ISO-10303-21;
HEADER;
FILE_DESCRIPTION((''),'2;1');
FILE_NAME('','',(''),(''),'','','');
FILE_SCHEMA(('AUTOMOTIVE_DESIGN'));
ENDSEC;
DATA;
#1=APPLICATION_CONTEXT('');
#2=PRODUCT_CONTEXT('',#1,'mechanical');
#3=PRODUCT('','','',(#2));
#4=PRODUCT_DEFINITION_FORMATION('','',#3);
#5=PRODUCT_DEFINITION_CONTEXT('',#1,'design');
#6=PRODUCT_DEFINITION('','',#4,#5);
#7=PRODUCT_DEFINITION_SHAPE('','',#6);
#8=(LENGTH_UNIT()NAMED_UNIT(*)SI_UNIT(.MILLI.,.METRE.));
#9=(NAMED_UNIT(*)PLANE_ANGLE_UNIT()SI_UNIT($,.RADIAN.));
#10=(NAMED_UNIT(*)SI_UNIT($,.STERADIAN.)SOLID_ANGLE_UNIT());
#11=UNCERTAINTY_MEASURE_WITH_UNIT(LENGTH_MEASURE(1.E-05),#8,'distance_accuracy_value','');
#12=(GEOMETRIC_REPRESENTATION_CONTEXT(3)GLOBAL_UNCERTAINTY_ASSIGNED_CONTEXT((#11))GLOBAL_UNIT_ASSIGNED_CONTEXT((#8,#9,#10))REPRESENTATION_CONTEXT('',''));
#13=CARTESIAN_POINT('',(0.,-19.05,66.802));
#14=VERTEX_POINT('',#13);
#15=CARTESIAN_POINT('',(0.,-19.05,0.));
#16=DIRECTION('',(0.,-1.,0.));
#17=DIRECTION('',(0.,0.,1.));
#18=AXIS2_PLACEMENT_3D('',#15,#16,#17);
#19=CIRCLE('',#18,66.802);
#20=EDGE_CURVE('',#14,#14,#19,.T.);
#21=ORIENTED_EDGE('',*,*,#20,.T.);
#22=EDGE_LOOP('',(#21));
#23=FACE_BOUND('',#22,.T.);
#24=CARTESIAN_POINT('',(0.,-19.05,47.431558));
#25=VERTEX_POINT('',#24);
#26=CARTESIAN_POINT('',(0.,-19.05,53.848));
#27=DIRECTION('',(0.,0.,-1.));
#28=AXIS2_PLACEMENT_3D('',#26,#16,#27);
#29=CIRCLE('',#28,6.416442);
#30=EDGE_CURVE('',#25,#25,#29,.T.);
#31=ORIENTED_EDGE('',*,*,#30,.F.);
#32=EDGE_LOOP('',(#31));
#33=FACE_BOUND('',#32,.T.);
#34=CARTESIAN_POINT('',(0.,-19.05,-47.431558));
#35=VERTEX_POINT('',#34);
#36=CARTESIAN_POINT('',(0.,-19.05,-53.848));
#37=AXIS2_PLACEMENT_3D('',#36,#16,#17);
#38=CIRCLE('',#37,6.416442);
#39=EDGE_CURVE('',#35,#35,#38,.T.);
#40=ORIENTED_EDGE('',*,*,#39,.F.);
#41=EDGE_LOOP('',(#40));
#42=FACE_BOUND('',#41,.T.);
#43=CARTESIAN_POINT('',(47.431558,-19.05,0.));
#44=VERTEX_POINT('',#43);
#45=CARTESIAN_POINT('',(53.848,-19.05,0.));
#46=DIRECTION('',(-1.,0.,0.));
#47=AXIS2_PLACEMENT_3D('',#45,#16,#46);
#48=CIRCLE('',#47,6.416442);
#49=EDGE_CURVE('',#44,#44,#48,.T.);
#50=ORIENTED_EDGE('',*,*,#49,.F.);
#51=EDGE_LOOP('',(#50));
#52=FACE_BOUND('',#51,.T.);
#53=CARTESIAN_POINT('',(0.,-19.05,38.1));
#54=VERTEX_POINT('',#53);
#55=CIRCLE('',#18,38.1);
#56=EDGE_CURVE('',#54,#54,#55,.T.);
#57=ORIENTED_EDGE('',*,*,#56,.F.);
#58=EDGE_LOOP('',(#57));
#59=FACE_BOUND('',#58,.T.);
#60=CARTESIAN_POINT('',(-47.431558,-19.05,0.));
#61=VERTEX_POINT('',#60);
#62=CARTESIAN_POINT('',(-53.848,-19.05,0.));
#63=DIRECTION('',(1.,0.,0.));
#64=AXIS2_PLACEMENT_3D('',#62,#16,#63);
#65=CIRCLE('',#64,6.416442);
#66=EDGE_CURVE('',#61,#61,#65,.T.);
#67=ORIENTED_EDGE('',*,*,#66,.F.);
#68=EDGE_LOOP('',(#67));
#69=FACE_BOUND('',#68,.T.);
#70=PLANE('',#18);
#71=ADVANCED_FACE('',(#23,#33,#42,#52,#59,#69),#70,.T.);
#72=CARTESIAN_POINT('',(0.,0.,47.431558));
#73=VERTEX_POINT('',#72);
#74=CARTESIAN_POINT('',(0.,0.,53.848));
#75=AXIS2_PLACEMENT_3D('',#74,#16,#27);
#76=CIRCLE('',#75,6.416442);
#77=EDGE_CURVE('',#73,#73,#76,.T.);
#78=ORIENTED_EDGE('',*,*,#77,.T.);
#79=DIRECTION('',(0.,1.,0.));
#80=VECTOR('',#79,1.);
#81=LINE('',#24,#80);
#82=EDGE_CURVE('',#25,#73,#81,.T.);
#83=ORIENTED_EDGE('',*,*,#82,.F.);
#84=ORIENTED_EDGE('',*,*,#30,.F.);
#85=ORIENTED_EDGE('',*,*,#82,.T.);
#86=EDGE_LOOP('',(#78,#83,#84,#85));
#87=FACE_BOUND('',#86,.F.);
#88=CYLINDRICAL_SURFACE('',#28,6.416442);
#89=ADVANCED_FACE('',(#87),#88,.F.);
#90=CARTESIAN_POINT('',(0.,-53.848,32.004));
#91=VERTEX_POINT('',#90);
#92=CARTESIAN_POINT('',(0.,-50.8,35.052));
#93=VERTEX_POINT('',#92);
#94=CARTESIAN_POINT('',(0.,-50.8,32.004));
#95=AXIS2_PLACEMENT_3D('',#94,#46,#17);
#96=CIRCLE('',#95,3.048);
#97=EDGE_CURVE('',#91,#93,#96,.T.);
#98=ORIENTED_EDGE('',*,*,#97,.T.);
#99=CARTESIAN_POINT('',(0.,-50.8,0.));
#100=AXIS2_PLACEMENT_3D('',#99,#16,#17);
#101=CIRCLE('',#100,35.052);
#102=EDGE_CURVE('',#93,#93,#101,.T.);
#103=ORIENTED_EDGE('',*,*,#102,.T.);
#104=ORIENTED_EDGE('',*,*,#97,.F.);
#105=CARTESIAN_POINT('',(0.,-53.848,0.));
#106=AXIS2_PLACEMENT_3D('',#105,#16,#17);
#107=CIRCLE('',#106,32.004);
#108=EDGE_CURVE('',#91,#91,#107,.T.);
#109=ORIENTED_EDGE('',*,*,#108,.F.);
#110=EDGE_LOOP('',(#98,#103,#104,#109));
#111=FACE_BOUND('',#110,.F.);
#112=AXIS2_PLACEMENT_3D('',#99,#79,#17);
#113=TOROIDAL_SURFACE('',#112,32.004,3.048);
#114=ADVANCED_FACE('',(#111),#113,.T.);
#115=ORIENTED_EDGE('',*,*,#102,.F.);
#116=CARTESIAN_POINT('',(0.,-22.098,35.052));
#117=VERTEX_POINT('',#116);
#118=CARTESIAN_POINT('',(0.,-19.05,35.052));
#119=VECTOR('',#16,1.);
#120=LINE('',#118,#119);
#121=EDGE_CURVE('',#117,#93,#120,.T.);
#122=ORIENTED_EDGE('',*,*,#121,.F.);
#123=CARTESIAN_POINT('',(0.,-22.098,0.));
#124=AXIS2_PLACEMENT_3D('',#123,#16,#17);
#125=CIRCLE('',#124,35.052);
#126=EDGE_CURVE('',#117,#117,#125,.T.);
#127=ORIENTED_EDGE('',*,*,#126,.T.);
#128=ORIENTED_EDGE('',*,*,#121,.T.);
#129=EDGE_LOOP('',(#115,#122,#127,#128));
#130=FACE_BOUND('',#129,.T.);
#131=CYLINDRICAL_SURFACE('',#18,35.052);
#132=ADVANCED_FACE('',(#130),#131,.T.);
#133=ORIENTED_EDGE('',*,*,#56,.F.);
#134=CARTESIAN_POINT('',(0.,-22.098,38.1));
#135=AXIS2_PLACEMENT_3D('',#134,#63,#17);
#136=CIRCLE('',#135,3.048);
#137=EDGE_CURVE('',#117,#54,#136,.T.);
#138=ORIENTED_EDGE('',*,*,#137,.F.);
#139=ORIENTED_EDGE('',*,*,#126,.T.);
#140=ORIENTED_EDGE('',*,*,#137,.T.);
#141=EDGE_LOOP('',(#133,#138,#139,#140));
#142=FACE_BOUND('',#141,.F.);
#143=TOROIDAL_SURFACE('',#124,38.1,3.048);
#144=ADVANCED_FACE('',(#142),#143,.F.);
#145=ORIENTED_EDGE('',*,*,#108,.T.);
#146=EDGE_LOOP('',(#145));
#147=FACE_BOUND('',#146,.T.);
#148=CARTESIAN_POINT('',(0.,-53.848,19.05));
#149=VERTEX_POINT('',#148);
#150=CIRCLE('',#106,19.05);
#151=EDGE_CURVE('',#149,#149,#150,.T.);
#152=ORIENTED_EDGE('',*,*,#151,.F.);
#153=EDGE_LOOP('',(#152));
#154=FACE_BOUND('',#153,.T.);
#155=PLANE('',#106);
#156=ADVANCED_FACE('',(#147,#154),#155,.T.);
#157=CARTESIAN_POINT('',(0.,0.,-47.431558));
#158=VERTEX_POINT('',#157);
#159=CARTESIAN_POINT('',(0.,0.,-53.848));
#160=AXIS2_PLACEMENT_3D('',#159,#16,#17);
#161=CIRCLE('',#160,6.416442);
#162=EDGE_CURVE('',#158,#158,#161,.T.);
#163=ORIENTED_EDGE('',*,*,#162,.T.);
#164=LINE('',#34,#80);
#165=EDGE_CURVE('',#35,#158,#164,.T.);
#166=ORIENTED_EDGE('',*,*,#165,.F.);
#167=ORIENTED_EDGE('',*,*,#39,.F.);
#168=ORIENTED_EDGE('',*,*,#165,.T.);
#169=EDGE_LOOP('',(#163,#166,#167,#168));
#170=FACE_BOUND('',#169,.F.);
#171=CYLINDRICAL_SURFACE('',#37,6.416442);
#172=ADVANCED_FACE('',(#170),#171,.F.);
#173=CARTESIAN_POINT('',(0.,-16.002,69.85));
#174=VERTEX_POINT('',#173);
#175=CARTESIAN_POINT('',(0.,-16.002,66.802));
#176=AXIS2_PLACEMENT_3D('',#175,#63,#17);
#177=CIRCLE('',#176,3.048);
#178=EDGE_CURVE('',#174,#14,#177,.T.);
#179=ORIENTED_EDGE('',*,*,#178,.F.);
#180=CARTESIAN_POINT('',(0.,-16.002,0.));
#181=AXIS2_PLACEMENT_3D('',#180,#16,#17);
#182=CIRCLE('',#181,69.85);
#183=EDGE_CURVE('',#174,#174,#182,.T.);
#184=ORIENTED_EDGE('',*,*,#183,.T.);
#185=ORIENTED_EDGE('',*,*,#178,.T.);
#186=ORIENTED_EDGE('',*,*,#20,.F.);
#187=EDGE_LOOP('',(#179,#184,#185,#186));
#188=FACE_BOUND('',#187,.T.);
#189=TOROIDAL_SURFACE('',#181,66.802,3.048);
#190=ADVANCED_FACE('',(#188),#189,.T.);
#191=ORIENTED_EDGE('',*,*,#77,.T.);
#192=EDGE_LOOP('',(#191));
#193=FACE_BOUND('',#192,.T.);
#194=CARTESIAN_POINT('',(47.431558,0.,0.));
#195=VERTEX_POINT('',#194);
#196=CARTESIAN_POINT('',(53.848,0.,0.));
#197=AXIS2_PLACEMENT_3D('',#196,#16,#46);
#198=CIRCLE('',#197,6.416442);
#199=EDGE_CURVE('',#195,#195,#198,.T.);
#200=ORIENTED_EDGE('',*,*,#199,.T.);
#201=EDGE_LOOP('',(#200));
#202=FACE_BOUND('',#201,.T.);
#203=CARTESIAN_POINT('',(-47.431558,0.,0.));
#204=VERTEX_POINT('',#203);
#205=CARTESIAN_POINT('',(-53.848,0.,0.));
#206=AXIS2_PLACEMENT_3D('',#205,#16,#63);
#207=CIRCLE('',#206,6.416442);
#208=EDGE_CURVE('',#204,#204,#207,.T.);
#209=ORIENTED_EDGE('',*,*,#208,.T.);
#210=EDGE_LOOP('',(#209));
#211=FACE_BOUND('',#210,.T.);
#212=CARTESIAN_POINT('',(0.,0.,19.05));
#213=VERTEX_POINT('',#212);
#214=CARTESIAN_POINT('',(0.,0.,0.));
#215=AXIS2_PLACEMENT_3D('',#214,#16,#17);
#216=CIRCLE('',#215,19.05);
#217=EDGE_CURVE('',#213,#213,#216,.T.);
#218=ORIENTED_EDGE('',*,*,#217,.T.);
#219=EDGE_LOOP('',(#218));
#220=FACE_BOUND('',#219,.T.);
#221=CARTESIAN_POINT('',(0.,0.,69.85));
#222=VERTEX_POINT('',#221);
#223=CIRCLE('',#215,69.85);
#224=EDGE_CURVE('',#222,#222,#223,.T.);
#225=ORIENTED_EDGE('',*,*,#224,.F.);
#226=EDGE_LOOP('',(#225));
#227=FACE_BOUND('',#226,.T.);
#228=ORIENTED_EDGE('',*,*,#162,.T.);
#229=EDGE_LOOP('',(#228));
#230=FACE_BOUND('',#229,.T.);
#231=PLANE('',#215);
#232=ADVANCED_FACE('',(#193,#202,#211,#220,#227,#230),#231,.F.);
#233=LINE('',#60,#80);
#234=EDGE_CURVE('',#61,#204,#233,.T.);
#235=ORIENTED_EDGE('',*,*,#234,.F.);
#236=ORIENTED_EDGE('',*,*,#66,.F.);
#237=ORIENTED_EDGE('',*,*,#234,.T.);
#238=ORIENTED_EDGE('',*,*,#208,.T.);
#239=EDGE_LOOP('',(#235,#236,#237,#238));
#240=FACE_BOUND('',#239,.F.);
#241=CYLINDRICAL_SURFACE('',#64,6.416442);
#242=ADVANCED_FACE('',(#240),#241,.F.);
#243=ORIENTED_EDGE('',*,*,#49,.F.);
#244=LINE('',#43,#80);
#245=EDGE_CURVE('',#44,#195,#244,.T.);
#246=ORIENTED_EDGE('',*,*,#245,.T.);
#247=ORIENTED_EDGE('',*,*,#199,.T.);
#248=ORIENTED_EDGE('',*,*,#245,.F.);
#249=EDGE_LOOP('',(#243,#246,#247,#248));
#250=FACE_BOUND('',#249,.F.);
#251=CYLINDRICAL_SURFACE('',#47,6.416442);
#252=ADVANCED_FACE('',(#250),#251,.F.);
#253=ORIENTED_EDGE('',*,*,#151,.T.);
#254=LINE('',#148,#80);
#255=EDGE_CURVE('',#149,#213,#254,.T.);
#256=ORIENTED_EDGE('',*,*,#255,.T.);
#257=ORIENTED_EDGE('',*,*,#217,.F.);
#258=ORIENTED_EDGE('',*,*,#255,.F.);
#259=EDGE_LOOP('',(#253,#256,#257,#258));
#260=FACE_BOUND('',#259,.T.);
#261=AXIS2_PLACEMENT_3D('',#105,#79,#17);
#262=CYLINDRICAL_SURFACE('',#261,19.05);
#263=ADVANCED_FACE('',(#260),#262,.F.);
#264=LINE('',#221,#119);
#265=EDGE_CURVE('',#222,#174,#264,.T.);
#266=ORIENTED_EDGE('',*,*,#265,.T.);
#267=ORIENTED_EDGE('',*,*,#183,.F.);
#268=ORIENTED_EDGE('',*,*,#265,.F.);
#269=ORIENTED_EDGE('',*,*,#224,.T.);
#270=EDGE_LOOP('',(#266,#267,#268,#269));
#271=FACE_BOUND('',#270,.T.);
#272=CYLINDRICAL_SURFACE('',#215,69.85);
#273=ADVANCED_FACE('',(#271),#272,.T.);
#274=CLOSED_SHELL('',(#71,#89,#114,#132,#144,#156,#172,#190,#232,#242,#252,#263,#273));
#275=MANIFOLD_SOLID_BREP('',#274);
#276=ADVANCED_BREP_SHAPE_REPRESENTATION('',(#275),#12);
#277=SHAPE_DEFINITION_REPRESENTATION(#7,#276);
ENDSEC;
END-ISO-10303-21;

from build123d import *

# Parameters (mm, degrees)
F2_R            = 6.4164417579
F3_DEPTH        = 19.051
F3_COPIES_COUNT = 4
F4_R            = 3.048


# Not quite as in the source:
# - a pattern or mirror of a feature is missing from the dataset's text; its kind, count and spacing are read off the source's solid


with BuildPart() as f1:
    # F0 (on Right) → F1 (revolve)
    with BuildSketch(Plane.YZ):
        Polygon((-53.848, 19.05), (0, 19.05), (0, 69.85), (-19.05, 69.85), (-19.05, 35.052), (-53.848, 35.052), align=None)
    revolve(axis=Axis((0, -58.1718310714, 0), (0, -1, 0)))

    # F2 (on face) → F3 (cut, through all)
    with BuildSketch(Plane.XZ.offset(19.05)):
        with Locations((-53.848, 0)):
            Circle(F2_R)
    f3 = extrude(amount=-F3_DEPTH, mode=Mode.SUBTRACT)

    # F3_copies: F3 ×4 about axis
    f3_copies_axis = Axis((0, 0, 0), (0, 1, 0))
    for i in range(1, F3_COPIES_COUNT):
        add(f3.rotate(f3_copies_axis, i * 360 / F3_COPIES_COUNT), mode=Mode.SUBTRACT)

    # F4
    f4_edges = [f1.edges().sort_by_distance(p)[0] for p in [
        (0, -53.848, -35.052),
        (0, -19.05, -35.052),
        (0, -19.05, -69.85),
    ]]
    fillet(f4_edges, radius=F4_R)


solid = f1.part
